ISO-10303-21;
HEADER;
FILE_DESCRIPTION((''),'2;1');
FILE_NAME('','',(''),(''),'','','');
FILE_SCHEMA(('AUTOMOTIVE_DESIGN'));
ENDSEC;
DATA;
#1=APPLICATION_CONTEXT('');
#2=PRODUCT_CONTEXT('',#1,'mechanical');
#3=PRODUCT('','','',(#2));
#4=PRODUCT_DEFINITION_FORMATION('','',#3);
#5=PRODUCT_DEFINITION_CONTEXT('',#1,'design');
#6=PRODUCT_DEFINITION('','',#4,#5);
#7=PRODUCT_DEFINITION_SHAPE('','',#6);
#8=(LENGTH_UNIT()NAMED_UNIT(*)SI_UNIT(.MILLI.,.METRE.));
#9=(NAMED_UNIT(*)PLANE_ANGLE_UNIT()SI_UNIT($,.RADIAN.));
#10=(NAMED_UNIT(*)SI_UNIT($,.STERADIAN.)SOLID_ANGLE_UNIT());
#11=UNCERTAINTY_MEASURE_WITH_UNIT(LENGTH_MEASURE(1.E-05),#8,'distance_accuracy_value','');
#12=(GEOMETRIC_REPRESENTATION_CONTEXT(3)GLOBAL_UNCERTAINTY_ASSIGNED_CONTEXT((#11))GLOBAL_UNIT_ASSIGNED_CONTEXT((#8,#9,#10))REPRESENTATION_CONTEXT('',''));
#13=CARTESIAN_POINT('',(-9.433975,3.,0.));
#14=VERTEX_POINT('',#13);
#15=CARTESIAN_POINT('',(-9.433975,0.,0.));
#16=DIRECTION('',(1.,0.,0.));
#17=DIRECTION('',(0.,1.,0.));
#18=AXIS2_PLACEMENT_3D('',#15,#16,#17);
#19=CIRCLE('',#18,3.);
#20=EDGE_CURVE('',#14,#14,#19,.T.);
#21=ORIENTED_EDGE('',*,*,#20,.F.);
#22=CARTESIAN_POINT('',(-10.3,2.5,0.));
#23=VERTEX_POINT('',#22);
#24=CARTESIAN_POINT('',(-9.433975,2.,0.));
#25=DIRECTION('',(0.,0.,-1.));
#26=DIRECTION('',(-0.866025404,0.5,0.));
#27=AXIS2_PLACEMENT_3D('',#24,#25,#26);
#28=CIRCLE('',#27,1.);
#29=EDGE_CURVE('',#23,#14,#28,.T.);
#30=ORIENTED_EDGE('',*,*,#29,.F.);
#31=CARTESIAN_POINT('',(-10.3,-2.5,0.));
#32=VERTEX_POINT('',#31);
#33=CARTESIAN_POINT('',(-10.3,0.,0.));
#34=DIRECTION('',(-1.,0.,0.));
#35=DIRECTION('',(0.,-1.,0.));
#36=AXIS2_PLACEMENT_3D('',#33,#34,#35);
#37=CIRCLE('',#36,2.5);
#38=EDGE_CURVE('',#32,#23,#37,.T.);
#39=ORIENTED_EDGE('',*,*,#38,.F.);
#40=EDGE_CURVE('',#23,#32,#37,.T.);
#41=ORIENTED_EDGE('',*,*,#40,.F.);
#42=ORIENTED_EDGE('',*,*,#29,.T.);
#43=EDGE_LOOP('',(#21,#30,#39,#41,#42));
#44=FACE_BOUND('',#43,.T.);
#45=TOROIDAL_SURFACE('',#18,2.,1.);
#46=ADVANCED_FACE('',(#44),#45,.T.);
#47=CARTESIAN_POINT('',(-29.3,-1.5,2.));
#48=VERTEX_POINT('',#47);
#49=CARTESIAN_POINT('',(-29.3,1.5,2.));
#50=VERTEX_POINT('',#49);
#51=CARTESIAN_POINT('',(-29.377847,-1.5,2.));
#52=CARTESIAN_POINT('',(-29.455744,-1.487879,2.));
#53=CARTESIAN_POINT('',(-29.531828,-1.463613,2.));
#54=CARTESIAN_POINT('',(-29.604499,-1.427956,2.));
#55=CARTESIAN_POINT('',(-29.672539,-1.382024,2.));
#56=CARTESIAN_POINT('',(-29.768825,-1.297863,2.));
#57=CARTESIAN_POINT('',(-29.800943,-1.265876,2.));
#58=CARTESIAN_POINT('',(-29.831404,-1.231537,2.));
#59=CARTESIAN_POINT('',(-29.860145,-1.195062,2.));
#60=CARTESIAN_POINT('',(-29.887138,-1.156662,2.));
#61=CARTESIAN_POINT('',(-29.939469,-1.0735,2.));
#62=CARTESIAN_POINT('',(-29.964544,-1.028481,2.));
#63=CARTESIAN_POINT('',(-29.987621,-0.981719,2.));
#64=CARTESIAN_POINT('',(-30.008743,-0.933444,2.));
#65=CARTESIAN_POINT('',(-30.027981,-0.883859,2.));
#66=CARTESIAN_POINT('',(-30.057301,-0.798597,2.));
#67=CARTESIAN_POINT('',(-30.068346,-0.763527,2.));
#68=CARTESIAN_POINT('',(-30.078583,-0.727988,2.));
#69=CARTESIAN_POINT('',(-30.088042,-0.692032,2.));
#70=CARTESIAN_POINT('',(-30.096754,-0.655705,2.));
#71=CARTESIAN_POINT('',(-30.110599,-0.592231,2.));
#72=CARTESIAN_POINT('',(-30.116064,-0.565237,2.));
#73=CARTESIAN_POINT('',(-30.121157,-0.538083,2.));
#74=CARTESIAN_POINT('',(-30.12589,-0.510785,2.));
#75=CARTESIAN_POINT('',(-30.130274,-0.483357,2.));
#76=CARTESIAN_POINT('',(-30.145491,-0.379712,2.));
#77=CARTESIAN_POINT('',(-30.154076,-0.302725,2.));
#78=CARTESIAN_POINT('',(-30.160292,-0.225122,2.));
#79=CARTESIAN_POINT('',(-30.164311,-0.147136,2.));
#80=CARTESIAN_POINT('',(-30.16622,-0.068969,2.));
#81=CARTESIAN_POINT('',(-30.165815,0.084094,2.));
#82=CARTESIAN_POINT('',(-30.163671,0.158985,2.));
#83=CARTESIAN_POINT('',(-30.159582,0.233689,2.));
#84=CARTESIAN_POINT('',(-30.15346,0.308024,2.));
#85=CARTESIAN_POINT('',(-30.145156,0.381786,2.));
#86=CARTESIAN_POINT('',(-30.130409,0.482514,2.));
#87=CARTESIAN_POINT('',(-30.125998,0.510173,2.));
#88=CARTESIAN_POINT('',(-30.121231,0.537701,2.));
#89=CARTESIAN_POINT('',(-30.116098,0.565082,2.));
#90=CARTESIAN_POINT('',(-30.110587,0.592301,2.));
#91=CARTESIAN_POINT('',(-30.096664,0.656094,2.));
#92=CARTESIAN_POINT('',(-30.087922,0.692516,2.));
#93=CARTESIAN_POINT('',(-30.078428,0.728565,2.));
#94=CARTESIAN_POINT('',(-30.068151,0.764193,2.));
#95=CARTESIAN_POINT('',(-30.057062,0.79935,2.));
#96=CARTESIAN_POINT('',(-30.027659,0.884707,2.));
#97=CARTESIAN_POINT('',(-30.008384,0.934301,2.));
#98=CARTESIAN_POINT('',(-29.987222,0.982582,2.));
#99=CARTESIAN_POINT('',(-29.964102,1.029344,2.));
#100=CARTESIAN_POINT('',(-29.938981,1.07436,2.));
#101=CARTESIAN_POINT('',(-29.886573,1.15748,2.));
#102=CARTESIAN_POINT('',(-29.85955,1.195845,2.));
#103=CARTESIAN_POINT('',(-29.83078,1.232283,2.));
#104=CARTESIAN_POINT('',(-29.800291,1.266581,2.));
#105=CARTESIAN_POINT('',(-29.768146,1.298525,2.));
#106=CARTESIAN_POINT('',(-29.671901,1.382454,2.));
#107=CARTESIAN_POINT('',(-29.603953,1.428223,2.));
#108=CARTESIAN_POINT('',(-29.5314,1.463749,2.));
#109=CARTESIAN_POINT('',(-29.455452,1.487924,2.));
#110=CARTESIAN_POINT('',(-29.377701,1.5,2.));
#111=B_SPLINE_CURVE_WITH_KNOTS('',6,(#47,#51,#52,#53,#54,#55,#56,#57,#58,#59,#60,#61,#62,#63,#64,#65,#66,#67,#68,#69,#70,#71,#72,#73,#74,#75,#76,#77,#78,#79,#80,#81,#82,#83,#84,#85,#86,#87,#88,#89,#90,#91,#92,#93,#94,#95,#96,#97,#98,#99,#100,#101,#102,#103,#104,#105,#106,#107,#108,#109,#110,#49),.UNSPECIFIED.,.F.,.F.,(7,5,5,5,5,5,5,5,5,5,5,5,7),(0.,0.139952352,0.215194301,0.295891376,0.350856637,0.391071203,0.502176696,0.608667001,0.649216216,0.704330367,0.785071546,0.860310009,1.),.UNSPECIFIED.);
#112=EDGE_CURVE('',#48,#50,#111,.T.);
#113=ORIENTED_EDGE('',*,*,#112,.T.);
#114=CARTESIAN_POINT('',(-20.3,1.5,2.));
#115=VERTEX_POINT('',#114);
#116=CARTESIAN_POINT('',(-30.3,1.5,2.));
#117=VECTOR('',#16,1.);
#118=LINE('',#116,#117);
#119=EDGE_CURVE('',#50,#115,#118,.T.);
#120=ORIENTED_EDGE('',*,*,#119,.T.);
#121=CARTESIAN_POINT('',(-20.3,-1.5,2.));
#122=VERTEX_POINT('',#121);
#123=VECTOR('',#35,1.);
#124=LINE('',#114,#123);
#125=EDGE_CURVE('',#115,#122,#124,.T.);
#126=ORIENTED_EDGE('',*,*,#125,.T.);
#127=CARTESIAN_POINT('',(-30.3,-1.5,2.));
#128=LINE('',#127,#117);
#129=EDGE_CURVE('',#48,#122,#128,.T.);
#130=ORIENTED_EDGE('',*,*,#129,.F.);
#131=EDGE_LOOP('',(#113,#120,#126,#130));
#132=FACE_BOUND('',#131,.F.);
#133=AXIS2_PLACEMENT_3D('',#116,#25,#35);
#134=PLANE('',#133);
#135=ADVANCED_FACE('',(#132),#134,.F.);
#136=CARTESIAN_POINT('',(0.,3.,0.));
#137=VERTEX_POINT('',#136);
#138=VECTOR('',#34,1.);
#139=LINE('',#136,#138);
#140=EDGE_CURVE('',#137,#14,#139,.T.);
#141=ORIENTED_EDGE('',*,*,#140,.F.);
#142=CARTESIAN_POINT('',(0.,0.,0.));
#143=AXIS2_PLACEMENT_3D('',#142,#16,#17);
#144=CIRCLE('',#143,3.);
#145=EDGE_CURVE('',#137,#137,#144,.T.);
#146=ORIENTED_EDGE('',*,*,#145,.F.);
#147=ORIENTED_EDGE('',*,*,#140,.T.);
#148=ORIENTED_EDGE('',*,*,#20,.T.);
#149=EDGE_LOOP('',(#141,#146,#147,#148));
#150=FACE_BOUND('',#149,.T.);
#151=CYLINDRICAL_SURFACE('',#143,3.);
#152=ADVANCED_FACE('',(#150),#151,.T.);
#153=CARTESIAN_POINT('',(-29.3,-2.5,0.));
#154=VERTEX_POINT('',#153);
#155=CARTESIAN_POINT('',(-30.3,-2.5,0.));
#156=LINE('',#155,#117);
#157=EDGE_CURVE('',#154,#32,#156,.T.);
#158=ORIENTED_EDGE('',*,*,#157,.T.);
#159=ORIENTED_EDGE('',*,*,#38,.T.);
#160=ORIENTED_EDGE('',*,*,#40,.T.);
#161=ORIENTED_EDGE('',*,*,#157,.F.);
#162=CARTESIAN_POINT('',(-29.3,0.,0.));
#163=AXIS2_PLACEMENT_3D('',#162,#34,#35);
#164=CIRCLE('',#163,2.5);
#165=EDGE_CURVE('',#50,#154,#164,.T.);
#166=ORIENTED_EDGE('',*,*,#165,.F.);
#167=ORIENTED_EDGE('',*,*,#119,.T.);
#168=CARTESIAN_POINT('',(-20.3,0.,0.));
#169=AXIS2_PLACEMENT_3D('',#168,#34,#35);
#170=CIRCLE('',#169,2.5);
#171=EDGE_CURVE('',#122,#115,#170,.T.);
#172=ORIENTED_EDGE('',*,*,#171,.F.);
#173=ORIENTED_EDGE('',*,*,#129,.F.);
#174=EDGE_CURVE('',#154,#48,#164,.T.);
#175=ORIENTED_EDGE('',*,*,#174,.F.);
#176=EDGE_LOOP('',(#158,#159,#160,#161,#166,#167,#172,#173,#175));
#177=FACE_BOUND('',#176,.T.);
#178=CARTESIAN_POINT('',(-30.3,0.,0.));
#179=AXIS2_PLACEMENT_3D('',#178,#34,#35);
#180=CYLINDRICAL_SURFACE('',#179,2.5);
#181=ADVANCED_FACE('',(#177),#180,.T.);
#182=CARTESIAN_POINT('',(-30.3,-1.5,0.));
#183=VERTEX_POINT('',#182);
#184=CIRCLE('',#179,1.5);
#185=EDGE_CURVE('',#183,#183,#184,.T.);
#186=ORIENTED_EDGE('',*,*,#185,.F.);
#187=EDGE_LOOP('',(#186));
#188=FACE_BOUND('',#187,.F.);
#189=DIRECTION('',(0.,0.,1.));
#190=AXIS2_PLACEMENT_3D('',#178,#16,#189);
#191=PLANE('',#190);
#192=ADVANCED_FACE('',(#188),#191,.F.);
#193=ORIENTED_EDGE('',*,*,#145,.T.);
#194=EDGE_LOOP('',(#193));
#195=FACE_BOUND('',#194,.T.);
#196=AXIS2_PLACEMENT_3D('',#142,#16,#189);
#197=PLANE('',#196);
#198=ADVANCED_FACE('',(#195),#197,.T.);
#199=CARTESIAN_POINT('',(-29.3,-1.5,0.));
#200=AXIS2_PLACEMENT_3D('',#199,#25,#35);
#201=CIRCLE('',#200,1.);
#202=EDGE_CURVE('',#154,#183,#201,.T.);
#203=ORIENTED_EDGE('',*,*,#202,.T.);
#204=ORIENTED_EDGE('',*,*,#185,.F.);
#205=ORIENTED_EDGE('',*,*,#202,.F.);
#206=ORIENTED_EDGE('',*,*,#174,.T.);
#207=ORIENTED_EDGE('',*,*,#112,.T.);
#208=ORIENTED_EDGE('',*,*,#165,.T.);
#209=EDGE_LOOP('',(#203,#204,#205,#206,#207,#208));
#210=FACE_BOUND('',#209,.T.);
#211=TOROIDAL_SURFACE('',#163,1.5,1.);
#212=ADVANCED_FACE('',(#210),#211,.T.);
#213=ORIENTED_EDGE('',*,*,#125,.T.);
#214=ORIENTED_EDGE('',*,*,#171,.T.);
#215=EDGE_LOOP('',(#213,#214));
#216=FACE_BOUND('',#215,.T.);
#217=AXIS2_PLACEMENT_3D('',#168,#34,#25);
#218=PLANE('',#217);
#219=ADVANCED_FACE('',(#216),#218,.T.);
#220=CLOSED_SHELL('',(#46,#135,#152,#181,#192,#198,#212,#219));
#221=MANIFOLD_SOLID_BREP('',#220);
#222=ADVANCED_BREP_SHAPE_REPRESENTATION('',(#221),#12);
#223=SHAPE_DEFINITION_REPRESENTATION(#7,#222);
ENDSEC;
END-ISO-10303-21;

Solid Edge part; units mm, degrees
sketch "Sketch1" plane through (0, 0, 0) normal (1, 0, 0) x (0, 1, 0)
  circle A0 centre (0, 0) radius 3
  dimension "D1" = 6
extrude "Protrusion1" add sketch "Sketch1" against normal blind 30.3
sketch "Sketch2" plane through (-30.3, 0, 0) normal (-1, 0, 0) x (0, -1, 0)
  circle A0 centre (0, 0) radius 2.5
  dimension "D1" = 5
extrude "Extrusionsausschnitt_1" cut sketch "Sketch2" against normal blind 20 flip side to cut
fillet "Verrundung_2" radius 1 1 edges at (-30.3, 2.5, 0)
fillet "Verrundung_3" radius 1 1 edges at (-10.3, 3, 0)
sketch "Sketch3" plane through (-30.3, 0, 0) normal (-1, 0, 0) x (0, -1, 0)
  line L0 (-1.5, 2) -> (1.5, 2)
  dimension "D1" = 0.5
extrude "Extrusionsausschnitt_3" cut sketch "Sketch3" against normal blind 10 material side at (-30.3, 0, 2.05)
properties material "Aluminium, 1060"
